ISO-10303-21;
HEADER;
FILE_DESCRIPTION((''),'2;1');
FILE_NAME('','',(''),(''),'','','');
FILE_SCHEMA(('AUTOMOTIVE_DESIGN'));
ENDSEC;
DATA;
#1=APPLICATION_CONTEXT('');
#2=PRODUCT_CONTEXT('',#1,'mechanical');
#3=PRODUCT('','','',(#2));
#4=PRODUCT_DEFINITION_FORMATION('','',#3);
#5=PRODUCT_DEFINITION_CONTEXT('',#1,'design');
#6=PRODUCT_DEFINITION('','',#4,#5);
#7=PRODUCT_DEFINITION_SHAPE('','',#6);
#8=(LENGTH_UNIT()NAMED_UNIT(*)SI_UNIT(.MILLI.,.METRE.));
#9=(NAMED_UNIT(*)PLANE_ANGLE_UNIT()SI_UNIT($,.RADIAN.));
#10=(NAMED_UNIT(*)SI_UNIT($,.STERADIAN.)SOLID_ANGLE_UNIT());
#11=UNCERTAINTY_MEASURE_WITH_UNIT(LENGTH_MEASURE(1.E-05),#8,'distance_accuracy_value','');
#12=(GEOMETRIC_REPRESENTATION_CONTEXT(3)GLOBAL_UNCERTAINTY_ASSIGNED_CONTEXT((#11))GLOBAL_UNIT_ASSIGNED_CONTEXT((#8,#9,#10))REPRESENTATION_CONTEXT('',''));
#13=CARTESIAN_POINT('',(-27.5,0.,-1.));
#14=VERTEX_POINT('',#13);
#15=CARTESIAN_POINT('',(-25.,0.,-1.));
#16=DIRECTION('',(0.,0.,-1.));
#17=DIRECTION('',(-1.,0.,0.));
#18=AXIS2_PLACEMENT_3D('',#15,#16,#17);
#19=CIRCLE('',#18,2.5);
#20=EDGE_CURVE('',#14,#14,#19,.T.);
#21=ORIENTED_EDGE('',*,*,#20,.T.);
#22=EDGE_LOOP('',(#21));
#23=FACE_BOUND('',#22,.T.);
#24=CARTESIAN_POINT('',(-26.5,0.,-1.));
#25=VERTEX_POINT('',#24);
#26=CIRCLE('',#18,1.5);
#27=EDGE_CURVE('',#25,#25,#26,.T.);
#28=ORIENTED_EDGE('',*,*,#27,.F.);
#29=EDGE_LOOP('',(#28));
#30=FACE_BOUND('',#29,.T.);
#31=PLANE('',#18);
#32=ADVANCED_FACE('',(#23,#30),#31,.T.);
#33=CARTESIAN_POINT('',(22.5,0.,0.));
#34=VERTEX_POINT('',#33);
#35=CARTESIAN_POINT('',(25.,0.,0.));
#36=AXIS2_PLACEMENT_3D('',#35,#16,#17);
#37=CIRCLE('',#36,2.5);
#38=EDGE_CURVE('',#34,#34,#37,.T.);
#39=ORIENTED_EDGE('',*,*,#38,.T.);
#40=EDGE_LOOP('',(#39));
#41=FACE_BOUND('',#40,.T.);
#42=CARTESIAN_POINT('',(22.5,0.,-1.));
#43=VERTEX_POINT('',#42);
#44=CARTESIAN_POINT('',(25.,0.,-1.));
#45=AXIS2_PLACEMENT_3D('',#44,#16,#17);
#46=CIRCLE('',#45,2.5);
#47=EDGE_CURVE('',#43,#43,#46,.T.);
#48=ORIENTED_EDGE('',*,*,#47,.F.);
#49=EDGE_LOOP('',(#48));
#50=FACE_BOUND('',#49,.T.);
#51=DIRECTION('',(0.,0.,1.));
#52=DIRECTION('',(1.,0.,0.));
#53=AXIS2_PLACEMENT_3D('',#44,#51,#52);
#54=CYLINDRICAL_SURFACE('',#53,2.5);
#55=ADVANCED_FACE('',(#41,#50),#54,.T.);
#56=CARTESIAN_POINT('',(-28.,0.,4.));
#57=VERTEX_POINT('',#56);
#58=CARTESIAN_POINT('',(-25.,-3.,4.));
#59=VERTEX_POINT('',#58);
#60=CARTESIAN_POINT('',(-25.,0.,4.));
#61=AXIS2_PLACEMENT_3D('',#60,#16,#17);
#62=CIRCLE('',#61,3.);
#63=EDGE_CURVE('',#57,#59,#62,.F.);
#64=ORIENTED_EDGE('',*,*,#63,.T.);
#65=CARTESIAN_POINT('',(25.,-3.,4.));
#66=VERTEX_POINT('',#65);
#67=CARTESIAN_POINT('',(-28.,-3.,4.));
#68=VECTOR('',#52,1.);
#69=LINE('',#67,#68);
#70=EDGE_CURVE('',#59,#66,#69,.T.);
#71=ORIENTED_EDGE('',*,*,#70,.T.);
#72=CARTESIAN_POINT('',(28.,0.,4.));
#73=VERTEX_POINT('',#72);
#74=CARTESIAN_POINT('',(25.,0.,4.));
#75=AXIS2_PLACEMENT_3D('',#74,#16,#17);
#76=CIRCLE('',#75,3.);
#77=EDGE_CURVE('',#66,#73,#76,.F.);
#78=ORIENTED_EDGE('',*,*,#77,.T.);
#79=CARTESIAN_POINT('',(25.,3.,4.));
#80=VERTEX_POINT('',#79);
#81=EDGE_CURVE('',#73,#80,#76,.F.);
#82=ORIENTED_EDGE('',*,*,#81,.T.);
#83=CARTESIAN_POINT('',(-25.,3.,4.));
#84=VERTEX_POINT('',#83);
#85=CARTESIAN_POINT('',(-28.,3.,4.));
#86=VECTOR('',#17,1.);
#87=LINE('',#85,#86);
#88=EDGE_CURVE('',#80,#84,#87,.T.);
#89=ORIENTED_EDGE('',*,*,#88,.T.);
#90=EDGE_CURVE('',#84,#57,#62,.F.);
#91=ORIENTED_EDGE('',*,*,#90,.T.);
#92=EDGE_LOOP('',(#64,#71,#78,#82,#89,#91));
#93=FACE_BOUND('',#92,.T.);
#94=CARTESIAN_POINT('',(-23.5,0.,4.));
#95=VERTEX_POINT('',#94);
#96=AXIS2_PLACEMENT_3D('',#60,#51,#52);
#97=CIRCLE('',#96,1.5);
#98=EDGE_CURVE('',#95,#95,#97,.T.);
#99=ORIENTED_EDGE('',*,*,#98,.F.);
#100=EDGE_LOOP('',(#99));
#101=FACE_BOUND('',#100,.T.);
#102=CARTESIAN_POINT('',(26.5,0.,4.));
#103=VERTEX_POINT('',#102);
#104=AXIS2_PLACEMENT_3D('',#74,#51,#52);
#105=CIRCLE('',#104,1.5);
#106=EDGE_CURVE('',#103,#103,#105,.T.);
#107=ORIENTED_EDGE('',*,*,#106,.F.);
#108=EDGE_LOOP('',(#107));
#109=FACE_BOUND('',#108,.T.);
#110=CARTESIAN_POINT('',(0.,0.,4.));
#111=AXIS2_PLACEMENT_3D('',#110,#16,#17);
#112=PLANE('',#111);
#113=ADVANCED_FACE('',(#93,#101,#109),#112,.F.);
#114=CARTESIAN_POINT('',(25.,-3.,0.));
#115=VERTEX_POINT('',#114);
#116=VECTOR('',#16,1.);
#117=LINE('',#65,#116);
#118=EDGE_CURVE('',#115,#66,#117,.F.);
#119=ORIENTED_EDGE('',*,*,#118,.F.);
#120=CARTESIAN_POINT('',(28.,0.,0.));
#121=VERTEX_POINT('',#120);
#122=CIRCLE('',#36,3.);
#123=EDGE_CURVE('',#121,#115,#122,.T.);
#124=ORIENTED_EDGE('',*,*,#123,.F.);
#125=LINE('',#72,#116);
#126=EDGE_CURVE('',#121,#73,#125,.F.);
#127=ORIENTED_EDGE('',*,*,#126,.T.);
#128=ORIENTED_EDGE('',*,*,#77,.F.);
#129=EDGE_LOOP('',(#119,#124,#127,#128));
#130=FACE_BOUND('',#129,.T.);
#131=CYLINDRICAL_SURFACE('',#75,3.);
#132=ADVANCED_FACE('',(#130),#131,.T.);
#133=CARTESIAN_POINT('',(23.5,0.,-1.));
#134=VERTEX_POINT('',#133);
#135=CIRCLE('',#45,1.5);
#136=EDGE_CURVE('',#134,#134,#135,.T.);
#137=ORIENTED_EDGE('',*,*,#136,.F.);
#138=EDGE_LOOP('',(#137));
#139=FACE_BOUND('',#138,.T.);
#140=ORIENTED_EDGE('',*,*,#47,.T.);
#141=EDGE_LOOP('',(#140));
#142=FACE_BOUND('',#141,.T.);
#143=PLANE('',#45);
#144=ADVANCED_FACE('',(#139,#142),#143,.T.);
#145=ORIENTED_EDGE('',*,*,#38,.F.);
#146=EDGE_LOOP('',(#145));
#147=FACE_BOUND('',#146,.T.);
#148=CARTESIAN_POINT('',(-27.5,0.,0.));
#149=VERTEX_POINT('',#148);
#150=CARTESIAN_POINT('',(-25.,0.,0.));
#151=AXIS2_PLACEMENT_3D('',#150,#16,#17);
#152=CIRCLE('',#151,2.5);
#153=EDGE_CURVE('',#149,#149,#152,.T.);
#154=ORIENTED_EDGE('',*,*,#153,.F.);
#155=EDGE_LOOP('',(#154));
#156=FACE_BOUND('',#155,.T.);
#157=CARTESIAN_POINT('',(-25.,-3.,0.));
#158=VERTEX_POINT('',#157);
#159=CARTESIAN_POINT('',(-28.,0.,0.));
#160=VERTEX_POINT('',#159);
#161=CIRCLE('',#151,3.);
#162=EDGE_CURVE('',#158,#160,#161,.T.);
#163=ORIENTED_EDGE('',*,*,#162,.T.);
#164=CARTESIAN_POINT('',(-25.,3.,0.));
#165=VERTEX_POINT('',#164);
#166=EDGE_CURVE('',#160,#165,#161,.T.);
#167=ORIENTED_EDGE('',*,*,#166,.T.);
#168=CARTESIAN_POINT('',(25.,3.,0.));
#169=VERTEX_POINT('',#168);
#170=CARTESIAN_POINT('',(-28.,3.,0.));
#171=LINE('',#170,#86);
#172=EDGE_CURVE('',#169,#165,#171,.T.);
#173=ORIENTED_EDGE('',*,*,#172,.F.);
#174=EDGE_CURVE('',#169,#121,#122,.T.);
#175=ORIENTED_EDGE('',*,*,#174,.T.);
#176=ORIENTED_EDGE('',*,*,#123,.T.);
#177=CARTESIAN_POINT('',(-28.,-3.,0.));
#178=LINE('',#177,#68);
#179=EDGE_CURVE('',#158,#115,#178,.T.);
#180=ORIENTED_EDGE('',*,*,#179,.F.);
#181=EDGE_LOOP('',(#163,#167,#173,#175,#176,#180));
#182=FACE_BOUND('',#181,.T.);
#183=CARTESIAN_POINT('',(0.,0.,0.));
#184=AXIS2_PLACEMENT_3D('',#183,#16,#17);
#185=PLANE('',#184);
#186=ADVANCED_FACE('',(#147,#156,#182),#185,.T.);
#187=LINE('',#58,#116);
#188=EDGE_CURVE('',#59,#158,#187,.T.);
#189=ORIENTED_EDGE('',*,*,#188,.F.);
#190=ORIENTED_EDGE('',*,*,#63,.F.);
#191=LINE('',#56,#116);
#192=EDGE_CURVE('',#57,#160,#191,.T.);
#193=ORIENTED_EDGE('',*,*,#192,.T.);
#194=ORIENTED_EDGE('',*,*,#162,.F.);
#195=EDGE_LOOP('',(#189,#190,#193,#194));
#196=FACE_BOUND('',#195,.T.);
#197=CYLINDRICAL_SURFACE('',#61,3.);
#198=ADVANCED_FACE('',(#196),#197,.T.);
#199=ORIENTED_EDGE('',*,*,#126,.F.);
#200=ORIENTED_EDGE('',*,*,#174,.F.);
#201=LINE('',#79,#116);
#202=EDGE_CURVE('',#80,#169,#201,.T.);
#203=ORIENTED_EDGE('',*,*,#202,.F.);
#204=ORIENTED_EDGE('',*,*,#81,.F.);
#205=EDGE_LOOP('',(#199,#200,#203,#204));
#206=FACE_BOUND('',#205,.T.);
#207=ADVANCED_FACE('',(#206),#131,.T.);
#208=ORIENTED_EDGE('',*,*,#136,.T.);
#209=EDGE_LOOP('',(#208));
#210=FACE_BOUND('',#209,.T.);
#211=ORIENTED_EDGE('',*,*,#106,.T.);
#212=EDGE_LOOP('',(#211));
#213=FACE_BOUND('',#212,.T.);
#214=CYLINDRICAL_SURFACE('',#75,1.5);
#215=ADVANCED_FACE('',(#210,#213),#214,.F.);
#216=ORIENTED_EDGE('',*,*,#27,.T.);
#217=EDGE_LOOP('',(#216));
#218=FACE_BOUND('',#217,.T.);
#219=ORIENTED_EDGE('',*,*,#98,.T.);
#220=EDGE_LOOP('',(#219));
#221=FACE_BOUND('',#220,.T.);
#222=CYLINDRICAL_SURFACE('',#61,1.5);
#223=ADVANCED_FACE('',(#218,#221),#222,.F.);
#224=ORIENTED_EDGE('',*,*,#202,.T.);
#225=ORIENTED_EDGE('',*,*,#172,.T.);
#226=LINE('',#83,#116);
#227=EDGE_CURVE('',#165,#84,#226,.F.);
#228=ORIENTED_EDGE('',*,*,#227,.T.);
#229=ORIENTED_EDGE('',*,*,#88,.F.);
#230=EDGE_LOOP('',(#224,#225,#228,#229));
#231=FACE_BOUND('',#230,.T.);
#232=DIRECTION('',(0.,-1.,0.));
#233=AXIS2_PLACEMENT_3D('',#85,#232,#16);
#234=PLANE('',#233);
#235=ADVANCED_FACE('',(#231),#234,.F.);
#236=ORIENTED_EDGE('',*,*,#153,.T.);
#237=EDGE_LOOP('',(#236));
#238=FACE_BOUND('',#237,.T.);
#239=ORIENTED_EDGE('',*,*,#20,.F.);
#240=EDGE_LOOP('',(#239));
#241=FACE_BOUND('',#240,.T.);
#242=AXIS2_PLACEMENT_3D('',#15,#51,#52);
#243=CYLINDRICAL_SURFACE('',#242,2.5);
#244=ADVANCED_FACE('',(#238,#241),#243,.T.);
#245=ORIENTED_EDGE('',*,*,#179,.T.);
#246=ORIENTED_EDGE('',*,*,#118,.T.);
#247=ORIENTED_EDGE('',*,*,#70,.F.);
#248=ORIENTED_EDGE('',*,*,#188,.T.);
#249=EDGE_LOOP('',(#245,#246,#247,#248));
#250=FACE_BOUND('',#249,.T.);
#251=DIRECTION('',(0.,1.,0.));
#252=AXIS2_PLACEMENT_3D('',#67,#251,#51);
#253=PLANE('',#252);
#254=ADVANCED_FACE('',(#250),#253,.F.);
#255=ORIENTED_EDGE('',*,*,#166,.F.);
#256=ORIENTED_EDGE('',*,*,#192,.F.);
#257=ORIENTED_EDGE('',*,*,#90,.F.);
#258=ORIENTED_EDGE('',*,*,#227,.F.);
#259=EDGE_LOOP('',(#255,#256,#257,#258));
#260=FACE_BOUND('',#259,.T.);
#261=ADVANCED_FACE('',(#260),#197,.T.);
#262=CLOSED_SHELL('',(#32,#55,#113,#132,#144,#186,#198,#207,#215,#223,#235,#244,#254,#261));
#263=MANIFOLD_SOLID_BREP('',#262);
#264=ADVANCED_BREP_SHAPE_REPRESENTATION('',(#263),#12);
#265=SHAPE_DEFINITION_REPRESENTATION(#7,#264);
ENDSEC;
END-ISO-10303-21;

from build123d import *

# Parameters (mm, degrees)
SKETCH_1_W      = 56
SKETCH_1_H      = 6
SKETCH_1_R      = 1.5
EXTRUDE_1_DEPTH = 4
FILLET_1_R      = 3
EXTRUDE_START   = 1
SKETCH_2_R      = 2.5
SKETCH_2_R_2    = 1.5
EXTRUDE_2_DEPTH = 1


with BuildPart() as part:
    # 草图1 → 凸台-拉伸1 (new body)
    with BuildSketch(Plane.XY):
        Rectangle(SKETCH_1_W, SKETCH_1_H)
        with Locations((-25, 0)):
            Circle(SKETCH_1_R, mode=Mode.SUBTRACT)
        with Locations((25, 0)):
            Circle(SKETCH_1_R, mode=Mode.SUBTRACT)
    extrude(amount=EXTRUDE_1_DEPTH)

    # 圆角1
    fillet_1_edges = [part.edges().sort_by_distance(p)[0] for p in [
        (28, -3, 2),
        (28, 3, 2),
        (-28, -3, 2),
        (-28, 3, 2),
    ]]
    fillet(fillet_1_edges, radius=FILLET_1_R - 0.0001)  # a hair under: the kernel refuses the full size

    # 草图2 → 凸台-拉伸2 (add)
    # profile 1 of 2: a face of its own
    with BuildSketch(Plane(origin=(0, 0, 0), x_dir=(-1, 0, 0), z_dir=(0, 0, -1)).offset(EXTRUDE_START)):
        with Locations((25, 0)):
            Circle(SKETCH_2_R)
        with Locations((25, 0)):
            Circle(SKETCH_2_R_2, mode=Mode.SUBTRACT)
    # profile 2 of 2: a face of its own
    with BuildSketch(Plane(origin=(0, 0, 0), x_dir=(-1, 0, 0), z_dir=(0, 0, -1)).offset(EXTRUDE_START)):
        with Locations((-25, 0)):
            Circle(SKETCH_2_R)
        with Locations((-25, 0)):
            Circle(SKETCH_2_R_2, mode=Mode.SUBTRACT)
    extrude(amount=-EXTRUDE_2_DEPTH)


solid = part.part
